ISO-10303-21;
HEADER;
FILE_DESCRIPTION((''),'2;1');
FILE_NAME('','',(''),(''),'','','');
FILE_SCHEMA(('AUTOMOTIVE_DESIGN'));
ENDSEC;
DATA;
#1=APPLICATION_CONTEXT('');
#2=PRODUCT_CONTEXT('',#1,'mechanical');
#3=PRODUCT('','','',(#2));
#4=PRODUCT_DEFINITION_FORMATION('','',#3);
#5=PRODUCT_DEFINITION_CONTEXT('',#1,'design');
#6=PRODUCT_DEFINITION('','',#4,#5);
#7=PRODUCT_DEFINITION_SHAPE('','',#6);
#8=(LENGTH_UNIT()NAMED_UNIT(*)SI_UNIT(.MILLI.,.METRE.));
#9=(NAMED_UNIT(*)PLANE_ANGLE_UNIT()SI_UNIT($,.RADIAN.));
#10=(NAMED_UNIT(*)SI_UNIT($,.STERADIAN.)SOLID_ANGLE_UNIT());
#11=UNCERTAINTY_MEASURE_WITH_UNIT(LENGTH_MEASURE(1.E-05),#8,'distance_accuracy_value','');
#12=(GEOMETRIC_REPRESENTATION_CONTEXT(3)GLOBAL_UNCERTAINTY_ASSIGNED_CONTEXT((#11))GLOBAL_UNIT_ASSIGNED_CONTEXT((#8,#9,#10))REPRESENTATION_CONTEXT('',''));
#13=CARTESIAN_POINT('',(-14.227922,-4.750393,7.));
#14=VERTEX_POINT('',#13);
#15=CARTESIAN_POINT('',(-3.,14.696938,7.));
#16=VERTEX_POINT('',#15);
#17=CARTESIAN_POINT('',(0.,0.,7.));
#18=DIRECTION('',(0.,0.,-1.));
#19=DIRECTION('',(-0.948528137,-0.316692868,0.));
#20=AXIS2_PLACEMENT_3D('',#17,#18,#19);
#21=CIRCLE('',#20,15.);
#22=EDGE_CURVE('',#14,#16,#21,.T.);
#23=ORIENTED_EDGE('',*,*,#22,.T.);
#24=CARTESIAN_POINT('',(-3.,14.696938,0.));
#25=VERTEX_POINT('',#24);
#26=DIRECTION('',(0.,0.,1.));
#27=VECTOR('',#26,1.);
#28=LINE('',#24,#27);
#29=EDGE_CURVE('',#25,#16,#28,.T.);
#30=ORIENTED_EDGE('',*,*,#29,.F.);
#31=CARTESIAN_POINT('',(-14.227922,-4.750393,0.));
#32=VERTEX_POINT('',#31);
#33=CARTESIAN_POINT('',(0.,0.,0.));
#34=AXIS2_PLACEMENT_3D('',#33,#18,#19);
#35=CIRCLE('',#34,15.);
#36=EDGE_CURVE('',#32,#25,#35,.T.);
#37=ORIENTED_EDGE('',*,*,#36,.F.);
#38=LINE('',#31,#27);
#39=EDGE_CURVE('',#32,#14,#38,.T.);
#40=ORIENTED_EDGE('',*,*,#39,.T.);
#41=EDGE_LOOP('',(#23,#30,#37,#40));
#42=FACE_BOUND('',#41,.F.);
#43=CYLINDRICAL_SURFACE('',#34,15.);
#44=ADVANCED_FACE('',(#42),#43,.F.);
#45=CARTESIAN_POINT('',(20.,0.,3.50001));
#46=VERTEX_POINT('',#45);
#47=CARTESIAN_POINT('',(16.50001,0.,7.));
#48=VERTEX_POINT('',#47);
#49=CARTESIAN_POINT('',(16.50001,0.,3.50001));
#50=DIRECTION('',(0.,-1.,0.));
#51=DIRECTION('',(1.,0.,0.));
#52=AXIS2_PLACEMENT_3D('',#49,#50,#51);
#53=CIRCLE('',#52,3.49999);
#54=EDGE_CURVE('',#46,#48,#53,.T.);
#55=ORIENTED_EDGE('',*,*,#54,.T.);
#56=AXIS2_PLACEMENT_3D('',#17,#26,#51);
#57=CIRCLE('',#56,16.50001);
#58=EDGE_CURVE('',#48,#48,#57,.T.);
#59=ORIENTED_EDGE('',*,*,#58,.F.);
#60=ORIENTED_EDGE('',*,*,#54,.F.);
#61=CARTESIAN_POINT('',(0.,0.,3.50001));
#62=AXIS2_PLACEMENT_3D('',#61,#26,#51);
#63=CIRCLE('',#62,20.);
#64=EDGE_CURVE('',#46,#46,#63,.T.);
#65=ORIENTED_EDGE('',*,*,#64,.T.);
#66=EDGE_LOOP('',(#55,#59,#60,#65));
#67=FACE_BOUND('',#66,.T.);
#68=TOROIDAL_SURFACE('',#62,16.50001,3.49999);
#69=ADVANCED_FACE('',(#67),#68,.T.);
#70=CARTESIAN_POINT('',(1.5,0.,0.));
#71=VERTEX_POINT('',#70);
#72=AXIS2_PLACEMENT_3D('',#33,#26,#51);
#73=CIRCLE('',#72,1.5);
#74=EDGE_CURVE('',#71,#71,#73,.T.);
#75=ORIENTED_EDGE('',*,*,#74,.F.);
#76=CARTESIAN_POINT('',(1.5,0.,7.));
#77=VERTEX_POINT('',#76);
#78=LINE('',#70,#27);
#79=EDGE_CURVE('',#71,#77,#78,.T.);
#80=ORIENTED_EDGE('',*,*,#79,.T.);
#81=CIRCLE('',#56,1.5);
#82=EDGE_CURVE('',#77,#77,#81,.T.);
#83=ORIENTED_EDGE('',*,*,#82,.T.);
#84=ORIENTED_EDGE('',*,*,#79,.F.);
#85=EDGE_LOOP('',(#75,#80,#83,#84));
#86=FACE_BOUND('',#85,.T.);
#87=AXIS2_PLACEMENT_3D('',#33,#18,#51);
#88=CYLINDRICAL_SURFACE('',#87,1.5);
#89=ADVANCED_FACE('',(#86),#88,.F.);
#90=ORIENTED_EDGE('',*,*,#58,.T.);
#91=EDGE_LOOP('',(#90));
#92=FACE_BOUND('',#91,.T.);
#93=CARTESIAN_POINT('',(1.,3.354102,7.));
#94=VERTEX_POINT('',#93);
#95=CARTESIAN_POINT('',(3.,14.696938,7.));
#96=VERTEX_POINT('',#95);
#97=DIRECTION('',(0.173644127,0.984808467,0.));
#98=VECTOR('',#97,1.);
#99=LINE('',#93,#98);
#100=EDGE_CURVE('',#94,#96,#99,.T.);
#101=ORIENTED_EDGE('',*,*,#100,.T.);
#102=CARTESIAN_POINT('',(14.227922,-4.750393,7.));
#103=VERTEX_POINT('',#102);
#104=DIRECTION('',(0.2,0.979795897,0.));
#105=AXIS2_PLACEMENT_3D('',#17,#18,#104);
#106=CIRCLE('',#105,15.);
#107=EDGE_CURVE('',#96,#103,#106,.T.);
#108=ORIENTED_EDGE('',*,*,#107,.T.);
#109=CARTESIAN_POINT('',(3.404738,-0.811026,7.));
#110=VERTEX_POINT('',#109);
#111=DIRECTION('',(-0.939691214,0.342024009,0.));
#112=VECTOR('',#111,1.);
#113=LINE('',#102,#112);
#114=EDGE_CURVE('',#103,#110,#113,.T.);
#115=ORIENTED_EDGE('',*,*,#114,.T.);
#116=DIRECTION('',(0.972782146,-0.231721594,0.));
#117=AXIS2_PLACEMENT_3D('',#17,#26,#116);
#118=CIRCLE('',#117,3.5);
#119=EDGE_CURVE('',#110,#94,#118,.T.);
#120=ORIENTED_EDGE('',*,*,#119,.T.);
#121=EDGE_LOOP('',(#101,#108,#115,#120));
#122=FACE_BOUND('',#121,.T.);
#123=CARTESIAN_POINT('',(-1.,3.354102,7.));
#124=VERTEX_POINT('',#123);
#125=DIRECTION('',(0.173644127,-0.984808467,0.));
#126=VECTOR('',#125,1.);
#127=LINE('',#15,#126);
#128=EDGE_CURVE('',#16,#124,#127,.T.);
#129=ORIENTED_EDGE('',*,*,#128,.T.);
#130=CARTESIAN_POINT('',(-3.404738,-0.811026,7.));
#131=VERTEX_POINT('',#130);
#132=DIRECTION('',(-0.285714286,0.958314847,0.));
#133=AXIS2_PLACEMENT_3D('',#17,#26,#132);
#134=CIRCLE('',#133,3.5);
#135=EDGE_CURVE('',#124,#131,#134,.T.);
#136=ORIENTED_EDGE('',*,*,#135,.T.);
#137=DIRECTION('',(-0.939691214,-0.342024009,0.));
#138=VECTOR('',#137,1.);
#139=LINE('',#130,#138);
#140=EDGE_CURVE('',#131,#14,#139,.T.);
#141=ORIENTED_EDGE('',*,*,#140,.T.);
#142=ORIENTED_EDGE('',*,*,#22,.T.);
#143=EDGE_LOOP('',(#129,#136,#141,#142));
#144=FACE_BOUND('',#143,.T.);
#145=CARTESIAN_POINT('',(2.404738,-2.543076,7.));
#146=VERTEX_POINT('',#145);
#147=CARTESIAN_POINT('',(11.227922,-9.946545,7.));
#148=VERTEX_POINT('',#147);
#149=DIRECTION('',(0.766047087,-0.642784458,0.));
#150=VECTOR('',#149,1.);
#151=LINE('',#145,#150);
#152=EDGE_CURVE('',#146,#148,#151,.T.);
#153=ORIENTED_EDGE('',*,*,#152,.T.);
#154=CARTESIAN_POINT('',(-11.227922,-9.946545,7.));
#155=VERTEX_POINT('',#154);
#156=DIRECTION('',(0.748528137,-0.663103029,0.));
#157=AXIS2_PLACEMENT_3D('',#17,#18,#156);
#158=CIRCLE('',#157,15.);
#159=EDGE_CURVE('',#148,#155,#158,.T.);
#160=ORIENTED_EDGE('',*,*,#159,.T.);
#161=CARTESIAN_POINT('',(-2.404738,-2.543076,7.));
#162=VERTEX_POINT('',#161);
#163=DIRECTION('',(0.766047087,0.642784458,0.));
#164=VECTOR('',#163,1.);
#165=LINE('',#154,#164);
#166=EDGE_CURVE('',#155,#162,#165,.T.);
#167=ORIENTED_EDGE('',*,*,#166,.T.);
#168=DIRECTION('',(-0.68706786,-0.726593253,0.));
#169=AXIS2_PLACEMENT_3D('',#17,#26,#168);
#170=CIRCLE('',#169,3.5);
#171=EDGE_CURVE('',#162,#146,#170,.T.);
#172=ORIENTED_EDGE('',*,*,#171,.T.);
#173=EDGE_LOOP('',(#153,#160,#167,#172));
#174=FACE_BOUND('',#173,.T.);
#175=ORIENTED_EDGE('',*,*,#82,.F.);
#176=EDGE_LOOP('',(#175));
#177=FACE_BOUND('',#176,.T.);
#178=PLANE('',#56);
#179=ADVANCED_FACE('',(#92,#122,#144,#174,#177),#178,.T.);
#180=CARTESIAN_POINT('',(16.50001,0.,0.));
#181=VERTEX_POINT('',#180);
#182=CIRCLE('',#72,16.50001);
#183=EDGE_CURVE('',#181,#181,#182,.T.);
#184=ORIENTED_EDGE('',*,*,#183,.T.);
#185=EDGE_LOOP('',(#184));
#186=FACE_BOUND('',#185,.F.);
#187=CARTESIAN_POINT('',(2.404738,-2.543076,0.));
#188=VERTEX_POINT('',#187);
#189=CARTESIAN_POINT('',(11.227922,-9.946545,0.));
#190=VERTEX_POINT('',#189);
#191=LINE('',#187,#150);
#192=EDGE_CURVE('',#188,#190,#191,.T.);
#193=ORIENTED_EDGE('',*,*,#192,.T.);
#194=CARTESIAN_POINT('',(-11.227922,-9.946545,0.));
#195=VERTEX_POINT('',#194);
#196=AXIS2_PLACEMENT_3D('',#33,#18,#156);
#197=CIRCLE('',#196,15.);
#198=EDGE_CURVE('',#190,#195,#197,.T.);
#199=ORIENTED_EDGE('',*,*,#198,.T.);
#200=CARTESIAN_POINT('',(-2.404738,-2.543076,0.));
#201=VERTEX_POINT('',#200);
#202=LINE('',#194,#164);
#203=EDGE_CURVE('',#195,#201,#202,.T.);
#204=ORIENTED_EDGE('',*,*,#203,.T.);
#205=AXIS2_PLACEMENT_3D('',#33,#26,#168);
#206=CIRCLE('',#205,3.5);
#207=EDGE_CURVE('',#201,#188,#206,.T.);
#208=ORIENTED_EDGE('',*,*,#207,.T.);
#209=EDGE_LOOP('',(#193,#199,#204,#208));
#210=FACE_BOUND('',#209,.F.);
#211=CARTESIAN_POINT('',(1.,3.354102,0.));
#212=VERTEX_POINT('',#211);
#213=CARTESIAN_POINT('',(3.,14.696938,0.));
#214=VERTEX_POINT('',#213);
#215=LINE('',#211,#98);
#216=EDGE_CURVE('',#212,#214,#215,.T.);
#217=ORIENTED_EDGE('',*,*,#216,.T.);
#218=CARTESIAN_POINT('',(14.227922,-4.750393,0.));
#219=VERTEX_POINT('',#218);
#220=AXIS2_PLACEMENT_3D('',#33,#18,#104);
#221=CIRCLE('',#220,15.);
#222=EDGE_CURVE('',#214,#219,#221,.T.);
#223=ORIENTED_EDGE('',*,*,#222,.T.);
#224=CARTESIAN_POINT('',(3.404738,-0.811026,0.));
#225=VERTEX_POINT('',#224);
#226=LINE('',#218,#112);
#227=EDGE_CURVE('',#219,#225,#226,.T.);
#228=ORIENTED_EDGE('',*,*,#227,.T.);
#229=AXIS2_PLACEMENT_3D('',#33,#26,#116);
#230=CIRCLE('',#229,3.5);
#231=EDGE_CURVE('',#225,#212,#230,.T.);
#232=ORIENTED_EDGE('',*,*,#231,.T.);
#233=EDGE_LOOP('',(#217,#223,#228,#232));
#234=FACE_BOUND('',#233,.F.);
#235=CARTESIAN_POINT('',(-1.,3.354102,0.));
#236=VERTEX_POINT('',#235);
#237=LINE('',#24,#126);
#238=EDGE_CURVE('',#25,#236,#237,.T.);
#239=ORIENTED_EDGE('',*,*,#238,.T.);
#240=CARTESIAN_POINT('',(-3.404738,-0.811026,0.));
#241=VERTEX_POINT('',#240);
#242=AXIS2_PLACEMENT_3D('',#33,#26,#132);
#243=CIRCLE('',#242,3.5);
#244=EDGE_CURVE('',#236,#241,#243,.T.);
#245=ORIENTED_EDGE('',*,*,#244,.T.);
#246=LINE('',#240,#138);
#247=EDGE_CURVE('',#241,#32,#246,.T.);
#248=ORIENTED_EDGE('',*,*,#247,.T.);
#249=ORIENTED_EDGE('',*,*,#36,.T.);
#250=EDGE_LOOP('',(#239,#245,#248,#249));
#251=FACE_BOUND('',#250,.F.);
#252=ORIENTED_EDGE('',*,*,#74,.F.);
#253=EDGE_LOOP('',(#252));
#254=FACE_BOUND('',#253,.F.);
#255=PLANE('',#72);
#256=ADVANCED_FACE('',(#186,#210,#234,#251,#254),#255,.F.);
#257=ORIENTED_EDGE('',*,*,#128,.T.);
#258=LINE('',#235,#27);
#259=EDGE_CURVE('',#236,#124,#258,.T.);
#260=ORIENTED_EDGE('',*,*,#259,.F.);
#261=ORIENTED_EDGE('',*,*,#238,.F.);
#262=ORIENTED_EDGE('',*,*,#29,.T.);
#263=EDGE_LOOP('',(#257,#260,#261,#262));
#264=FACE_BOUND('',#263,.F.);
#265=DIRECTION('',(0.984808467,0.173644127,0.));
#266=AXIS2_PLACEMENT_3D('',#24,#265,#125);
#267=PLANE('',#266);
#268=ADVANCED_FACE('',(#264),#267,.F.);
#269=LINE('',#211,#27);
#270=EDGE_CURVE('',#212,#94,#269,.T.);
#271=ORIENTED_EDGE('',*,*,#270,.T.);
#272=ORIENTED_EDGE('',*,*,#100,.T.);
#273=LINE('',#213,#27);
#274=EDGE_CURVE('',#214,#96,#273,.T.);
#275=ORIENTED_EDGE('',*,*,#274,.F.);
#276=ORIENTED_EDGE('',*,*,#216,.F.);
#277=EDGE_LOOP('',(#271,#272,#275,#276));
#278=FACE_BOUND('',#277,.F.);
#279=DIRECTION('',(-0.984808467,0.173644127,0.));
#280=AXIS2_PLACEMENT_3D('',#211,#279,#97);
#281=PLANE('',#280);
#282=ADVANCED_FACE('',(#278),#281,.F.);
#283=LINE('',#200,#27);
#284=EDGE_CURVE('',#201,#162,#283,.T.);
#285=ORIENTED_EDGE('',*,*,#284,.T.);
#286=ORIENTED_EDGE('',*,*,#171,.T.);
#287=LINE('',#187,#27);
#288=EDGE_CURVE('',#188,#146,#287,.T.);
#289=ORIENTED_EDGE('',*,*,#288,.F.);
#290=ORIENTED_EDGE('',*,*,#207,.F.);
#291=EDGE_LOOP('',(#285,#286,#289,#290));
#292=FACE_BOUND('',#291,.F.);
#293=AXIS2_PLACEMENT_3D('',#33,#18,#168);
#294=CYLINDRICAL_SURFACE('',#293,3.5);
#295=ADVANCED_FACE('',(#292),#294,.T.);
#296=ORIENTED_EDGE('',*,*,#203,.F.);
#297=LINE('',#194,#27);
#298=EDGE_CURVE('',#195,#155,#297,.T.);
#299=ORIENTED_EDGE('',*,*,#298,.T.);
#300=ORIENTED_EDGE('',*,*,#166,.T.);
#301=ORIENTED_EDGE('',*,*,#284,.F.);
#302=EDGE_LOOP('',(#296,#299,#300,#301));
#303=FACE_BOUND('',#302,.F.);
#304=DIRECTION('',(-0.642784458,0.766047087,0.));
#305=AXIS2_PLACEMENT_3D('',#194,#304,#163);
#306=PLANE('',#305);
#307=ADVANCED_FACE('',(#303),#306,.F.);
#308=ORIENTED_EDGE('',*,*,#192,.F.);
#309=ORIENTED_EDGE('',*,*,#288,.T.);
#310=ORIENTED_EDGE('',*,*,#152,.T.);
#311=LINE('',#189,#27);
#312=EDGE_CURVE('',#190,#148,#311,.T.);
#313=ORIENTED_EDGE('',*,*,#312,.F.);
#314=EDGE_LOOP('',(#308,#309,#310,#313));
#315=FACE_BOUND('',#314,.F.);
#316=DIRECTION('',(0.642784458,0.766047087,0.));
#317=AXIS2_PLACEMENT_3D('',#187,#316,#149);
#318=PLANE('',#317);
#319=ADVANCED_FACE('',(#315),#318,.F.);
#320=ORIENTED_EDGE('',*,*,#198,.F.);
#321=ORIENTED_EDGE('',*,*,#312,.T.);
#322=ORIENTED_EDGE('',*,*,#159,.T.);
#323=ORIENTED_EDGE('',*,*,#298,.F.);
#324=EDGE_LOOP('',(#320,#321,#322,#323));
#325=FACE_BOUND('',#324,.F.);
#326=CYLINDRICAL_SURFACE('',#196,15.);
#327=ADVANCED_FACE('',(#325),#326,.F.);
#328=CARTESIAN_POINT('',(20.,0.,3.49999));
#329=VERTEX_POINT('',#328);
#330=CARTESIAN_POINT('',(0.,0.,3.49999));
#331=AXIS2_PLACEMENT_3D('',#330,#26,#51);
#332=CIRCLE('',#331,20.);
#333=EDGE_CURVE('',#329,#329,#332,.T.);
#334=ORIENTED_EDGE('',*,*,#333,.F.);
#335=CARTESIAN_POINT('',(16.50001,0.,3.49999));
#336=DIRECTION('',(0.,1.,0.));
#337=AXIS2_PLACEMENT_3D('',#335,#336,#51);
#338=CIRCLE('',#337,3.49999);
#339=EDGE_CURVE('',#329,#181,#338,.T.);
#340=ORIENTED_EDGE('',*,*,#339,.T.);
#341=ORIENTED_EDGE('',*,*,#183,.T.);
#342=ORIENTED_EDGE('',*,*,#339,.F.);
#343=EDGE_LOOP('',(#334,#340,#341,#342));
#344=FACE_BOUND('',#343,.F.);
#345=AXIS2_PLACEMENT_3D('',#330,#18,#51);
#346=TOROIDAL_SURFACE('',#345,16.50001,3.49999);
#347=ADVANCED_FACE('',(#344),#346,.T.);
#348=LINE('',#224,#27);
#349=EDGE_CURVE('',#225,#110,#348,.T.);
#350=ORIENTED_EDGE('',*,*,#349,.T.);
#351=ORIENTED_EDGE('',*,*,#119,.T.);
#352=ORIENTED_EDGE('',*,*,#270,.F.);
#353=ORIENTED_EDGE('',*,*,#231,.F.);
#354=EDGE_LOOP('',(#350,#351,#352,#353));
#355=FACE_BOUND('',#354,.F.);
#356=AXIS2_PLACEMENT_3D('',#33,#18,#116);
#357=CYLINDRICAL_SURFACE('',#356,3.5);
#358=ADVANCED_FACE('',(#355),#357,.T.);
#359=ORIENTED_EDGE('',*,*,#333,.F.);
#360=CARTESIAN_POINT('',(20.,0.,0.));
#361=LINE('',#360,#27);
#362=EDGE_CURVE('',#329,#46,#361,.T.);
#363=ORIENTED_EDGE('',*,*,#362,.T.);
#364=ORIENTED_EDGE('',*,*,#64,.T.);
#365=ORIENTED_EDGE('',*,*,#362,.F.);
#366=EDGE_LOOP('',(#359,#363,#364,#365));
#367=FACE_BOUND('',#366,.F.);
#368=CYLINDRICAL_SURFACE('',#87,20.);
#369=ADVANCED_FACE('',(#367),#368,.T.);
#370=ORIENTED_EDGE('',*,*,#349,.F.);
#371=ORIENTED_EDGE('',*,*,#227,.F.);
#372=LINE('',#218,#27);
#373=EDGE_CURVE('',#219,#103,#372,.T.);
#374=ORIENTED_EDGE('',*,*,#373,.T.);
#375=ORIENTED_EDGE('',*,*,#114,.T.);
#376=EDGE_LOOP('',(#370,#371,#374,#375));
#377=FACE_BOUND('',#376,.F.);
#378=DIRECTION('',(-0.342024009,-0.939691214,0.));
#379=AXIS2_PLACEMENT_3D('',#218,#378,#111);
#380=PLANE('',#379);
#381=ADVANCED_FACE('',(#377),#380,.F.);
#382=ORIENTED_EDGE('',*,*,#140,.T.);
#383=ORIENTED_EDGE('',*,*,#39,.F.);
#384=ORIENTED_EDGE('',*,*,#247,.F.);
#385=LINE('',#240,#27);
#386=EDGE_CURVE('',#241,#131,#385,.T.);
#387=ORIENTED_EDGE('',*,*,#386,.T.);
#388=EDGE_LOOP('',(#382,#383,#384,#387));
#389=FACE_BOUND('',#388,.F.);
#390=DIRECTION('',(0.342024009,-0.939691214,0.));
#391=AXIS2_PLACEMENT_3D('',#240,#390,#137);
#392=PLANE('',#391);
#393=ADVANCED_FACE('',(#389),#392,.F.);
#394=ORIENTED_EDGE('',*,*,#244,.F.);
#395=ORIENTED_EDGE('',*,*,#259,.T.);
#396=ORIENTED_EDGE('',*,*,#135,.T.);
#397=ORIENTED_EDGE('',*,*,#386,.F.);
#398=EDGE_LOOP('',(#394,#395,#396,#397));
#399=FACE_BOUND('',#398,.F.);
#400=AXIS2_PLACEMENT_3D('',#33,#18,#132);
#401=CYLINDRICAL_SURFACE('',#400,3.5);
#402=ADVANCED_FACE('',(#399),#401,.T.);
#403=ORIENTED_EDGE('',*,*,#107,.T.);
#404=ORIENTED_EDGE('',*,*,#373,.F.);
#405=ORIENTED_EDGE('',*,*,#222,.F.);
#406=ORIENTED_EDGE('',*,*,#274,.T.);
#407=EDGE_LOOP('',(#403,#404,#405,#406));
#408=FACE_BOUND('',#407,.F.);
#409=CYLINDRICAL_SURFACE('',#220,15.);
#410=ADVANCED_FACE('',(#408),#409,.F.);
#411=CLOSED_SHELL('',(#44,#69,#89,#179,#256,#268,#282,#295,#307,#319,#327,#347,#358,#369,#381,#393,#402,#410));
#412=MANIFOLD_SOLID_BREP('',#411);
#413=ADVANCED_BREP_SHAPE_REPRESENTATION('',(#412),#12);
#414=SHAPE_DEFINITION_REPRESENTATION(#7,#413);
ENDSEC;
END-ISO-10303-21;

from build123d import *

# Parameters (mm, degrees)
F0_R     = 20
F0_R_2   = 1.5
F1_DEPTH = 7
F2_R     = 3.49999


# Not quite as in the source:
# - a fillet or chamfer is up to 0.001 mm smaller than in the source, because OpenCascade refuses the exact size


with BuildPart() as f1:
    # F0 (on Top) → F1 (new body)
    with BuildSketch(Plane.XY):
        Circle(F0_R)
        with BuildLine():
            Line((-11.2279220614, -9.9465454397), (-2.4047375097, -2.5430763869))
            ThreePointArc((-2.4047375097, -2.5430763869), (0, -3.5), (2.4047375097, -2.5430763869))
            Line((2.4047375097, -2.5430763869), (11.2279220614, -9.9465454397))
            ThreePointArc((11.2279220614, -9.9465454397), (0, -15), (-11.2279220614, -9.9465454397))
        make_face(mode=Mode.SUBTRACT)
        with BuildLine():
            ThreePointArc((-14.2279220614, -4.750393017), (-12.9903810568, 7.5), (-3, 14.6969384567))
            Line((-3, 14.6969384567), (-1, 3.3541019662))
            ThreePointArc((-1, 3.3541019662), (-3.0310889132, 1.75), (-3.4047375097, -0.8110255793))
            Line((-3.4047375097, -0.8110255793), (-14.2279220614, -4.750393017))
        make_face(mode=Mode.SUBTRACT)
        Circle(F0_R_2, mode=Mode.SUBTRACT)
        with BuildLine():
            ThreePointArc((3.4047375097, -0.8110255793), (3.0310889132, 1.75), (1, 3.3541019662))
            Line((1, 3.3541019662), (3, 14.6969384567))
            ThreePointArc((3, 14.6969384567), (12.9903810568, 7.5), (14.2279220614, -4.750393017))
            Line((14.2279220614, -4.750393017), (3.4047375097, -0.8110255793))
        make_face(mode=Mode.SUBTRACT)
    extrude(amount=F1_DEPTH)

    # F2 (radius 3.5 in the source; OpenCascade refuses exactly that, so slightly less here)
    f2_edges = [f1.edges().sort_by_distance(p)[0] for p in [
        (-20, 0, 7),
        (-20, 0, 0),
    ]]
    fillet(f2_edges, radius=F2_R)


solid = f1.part
